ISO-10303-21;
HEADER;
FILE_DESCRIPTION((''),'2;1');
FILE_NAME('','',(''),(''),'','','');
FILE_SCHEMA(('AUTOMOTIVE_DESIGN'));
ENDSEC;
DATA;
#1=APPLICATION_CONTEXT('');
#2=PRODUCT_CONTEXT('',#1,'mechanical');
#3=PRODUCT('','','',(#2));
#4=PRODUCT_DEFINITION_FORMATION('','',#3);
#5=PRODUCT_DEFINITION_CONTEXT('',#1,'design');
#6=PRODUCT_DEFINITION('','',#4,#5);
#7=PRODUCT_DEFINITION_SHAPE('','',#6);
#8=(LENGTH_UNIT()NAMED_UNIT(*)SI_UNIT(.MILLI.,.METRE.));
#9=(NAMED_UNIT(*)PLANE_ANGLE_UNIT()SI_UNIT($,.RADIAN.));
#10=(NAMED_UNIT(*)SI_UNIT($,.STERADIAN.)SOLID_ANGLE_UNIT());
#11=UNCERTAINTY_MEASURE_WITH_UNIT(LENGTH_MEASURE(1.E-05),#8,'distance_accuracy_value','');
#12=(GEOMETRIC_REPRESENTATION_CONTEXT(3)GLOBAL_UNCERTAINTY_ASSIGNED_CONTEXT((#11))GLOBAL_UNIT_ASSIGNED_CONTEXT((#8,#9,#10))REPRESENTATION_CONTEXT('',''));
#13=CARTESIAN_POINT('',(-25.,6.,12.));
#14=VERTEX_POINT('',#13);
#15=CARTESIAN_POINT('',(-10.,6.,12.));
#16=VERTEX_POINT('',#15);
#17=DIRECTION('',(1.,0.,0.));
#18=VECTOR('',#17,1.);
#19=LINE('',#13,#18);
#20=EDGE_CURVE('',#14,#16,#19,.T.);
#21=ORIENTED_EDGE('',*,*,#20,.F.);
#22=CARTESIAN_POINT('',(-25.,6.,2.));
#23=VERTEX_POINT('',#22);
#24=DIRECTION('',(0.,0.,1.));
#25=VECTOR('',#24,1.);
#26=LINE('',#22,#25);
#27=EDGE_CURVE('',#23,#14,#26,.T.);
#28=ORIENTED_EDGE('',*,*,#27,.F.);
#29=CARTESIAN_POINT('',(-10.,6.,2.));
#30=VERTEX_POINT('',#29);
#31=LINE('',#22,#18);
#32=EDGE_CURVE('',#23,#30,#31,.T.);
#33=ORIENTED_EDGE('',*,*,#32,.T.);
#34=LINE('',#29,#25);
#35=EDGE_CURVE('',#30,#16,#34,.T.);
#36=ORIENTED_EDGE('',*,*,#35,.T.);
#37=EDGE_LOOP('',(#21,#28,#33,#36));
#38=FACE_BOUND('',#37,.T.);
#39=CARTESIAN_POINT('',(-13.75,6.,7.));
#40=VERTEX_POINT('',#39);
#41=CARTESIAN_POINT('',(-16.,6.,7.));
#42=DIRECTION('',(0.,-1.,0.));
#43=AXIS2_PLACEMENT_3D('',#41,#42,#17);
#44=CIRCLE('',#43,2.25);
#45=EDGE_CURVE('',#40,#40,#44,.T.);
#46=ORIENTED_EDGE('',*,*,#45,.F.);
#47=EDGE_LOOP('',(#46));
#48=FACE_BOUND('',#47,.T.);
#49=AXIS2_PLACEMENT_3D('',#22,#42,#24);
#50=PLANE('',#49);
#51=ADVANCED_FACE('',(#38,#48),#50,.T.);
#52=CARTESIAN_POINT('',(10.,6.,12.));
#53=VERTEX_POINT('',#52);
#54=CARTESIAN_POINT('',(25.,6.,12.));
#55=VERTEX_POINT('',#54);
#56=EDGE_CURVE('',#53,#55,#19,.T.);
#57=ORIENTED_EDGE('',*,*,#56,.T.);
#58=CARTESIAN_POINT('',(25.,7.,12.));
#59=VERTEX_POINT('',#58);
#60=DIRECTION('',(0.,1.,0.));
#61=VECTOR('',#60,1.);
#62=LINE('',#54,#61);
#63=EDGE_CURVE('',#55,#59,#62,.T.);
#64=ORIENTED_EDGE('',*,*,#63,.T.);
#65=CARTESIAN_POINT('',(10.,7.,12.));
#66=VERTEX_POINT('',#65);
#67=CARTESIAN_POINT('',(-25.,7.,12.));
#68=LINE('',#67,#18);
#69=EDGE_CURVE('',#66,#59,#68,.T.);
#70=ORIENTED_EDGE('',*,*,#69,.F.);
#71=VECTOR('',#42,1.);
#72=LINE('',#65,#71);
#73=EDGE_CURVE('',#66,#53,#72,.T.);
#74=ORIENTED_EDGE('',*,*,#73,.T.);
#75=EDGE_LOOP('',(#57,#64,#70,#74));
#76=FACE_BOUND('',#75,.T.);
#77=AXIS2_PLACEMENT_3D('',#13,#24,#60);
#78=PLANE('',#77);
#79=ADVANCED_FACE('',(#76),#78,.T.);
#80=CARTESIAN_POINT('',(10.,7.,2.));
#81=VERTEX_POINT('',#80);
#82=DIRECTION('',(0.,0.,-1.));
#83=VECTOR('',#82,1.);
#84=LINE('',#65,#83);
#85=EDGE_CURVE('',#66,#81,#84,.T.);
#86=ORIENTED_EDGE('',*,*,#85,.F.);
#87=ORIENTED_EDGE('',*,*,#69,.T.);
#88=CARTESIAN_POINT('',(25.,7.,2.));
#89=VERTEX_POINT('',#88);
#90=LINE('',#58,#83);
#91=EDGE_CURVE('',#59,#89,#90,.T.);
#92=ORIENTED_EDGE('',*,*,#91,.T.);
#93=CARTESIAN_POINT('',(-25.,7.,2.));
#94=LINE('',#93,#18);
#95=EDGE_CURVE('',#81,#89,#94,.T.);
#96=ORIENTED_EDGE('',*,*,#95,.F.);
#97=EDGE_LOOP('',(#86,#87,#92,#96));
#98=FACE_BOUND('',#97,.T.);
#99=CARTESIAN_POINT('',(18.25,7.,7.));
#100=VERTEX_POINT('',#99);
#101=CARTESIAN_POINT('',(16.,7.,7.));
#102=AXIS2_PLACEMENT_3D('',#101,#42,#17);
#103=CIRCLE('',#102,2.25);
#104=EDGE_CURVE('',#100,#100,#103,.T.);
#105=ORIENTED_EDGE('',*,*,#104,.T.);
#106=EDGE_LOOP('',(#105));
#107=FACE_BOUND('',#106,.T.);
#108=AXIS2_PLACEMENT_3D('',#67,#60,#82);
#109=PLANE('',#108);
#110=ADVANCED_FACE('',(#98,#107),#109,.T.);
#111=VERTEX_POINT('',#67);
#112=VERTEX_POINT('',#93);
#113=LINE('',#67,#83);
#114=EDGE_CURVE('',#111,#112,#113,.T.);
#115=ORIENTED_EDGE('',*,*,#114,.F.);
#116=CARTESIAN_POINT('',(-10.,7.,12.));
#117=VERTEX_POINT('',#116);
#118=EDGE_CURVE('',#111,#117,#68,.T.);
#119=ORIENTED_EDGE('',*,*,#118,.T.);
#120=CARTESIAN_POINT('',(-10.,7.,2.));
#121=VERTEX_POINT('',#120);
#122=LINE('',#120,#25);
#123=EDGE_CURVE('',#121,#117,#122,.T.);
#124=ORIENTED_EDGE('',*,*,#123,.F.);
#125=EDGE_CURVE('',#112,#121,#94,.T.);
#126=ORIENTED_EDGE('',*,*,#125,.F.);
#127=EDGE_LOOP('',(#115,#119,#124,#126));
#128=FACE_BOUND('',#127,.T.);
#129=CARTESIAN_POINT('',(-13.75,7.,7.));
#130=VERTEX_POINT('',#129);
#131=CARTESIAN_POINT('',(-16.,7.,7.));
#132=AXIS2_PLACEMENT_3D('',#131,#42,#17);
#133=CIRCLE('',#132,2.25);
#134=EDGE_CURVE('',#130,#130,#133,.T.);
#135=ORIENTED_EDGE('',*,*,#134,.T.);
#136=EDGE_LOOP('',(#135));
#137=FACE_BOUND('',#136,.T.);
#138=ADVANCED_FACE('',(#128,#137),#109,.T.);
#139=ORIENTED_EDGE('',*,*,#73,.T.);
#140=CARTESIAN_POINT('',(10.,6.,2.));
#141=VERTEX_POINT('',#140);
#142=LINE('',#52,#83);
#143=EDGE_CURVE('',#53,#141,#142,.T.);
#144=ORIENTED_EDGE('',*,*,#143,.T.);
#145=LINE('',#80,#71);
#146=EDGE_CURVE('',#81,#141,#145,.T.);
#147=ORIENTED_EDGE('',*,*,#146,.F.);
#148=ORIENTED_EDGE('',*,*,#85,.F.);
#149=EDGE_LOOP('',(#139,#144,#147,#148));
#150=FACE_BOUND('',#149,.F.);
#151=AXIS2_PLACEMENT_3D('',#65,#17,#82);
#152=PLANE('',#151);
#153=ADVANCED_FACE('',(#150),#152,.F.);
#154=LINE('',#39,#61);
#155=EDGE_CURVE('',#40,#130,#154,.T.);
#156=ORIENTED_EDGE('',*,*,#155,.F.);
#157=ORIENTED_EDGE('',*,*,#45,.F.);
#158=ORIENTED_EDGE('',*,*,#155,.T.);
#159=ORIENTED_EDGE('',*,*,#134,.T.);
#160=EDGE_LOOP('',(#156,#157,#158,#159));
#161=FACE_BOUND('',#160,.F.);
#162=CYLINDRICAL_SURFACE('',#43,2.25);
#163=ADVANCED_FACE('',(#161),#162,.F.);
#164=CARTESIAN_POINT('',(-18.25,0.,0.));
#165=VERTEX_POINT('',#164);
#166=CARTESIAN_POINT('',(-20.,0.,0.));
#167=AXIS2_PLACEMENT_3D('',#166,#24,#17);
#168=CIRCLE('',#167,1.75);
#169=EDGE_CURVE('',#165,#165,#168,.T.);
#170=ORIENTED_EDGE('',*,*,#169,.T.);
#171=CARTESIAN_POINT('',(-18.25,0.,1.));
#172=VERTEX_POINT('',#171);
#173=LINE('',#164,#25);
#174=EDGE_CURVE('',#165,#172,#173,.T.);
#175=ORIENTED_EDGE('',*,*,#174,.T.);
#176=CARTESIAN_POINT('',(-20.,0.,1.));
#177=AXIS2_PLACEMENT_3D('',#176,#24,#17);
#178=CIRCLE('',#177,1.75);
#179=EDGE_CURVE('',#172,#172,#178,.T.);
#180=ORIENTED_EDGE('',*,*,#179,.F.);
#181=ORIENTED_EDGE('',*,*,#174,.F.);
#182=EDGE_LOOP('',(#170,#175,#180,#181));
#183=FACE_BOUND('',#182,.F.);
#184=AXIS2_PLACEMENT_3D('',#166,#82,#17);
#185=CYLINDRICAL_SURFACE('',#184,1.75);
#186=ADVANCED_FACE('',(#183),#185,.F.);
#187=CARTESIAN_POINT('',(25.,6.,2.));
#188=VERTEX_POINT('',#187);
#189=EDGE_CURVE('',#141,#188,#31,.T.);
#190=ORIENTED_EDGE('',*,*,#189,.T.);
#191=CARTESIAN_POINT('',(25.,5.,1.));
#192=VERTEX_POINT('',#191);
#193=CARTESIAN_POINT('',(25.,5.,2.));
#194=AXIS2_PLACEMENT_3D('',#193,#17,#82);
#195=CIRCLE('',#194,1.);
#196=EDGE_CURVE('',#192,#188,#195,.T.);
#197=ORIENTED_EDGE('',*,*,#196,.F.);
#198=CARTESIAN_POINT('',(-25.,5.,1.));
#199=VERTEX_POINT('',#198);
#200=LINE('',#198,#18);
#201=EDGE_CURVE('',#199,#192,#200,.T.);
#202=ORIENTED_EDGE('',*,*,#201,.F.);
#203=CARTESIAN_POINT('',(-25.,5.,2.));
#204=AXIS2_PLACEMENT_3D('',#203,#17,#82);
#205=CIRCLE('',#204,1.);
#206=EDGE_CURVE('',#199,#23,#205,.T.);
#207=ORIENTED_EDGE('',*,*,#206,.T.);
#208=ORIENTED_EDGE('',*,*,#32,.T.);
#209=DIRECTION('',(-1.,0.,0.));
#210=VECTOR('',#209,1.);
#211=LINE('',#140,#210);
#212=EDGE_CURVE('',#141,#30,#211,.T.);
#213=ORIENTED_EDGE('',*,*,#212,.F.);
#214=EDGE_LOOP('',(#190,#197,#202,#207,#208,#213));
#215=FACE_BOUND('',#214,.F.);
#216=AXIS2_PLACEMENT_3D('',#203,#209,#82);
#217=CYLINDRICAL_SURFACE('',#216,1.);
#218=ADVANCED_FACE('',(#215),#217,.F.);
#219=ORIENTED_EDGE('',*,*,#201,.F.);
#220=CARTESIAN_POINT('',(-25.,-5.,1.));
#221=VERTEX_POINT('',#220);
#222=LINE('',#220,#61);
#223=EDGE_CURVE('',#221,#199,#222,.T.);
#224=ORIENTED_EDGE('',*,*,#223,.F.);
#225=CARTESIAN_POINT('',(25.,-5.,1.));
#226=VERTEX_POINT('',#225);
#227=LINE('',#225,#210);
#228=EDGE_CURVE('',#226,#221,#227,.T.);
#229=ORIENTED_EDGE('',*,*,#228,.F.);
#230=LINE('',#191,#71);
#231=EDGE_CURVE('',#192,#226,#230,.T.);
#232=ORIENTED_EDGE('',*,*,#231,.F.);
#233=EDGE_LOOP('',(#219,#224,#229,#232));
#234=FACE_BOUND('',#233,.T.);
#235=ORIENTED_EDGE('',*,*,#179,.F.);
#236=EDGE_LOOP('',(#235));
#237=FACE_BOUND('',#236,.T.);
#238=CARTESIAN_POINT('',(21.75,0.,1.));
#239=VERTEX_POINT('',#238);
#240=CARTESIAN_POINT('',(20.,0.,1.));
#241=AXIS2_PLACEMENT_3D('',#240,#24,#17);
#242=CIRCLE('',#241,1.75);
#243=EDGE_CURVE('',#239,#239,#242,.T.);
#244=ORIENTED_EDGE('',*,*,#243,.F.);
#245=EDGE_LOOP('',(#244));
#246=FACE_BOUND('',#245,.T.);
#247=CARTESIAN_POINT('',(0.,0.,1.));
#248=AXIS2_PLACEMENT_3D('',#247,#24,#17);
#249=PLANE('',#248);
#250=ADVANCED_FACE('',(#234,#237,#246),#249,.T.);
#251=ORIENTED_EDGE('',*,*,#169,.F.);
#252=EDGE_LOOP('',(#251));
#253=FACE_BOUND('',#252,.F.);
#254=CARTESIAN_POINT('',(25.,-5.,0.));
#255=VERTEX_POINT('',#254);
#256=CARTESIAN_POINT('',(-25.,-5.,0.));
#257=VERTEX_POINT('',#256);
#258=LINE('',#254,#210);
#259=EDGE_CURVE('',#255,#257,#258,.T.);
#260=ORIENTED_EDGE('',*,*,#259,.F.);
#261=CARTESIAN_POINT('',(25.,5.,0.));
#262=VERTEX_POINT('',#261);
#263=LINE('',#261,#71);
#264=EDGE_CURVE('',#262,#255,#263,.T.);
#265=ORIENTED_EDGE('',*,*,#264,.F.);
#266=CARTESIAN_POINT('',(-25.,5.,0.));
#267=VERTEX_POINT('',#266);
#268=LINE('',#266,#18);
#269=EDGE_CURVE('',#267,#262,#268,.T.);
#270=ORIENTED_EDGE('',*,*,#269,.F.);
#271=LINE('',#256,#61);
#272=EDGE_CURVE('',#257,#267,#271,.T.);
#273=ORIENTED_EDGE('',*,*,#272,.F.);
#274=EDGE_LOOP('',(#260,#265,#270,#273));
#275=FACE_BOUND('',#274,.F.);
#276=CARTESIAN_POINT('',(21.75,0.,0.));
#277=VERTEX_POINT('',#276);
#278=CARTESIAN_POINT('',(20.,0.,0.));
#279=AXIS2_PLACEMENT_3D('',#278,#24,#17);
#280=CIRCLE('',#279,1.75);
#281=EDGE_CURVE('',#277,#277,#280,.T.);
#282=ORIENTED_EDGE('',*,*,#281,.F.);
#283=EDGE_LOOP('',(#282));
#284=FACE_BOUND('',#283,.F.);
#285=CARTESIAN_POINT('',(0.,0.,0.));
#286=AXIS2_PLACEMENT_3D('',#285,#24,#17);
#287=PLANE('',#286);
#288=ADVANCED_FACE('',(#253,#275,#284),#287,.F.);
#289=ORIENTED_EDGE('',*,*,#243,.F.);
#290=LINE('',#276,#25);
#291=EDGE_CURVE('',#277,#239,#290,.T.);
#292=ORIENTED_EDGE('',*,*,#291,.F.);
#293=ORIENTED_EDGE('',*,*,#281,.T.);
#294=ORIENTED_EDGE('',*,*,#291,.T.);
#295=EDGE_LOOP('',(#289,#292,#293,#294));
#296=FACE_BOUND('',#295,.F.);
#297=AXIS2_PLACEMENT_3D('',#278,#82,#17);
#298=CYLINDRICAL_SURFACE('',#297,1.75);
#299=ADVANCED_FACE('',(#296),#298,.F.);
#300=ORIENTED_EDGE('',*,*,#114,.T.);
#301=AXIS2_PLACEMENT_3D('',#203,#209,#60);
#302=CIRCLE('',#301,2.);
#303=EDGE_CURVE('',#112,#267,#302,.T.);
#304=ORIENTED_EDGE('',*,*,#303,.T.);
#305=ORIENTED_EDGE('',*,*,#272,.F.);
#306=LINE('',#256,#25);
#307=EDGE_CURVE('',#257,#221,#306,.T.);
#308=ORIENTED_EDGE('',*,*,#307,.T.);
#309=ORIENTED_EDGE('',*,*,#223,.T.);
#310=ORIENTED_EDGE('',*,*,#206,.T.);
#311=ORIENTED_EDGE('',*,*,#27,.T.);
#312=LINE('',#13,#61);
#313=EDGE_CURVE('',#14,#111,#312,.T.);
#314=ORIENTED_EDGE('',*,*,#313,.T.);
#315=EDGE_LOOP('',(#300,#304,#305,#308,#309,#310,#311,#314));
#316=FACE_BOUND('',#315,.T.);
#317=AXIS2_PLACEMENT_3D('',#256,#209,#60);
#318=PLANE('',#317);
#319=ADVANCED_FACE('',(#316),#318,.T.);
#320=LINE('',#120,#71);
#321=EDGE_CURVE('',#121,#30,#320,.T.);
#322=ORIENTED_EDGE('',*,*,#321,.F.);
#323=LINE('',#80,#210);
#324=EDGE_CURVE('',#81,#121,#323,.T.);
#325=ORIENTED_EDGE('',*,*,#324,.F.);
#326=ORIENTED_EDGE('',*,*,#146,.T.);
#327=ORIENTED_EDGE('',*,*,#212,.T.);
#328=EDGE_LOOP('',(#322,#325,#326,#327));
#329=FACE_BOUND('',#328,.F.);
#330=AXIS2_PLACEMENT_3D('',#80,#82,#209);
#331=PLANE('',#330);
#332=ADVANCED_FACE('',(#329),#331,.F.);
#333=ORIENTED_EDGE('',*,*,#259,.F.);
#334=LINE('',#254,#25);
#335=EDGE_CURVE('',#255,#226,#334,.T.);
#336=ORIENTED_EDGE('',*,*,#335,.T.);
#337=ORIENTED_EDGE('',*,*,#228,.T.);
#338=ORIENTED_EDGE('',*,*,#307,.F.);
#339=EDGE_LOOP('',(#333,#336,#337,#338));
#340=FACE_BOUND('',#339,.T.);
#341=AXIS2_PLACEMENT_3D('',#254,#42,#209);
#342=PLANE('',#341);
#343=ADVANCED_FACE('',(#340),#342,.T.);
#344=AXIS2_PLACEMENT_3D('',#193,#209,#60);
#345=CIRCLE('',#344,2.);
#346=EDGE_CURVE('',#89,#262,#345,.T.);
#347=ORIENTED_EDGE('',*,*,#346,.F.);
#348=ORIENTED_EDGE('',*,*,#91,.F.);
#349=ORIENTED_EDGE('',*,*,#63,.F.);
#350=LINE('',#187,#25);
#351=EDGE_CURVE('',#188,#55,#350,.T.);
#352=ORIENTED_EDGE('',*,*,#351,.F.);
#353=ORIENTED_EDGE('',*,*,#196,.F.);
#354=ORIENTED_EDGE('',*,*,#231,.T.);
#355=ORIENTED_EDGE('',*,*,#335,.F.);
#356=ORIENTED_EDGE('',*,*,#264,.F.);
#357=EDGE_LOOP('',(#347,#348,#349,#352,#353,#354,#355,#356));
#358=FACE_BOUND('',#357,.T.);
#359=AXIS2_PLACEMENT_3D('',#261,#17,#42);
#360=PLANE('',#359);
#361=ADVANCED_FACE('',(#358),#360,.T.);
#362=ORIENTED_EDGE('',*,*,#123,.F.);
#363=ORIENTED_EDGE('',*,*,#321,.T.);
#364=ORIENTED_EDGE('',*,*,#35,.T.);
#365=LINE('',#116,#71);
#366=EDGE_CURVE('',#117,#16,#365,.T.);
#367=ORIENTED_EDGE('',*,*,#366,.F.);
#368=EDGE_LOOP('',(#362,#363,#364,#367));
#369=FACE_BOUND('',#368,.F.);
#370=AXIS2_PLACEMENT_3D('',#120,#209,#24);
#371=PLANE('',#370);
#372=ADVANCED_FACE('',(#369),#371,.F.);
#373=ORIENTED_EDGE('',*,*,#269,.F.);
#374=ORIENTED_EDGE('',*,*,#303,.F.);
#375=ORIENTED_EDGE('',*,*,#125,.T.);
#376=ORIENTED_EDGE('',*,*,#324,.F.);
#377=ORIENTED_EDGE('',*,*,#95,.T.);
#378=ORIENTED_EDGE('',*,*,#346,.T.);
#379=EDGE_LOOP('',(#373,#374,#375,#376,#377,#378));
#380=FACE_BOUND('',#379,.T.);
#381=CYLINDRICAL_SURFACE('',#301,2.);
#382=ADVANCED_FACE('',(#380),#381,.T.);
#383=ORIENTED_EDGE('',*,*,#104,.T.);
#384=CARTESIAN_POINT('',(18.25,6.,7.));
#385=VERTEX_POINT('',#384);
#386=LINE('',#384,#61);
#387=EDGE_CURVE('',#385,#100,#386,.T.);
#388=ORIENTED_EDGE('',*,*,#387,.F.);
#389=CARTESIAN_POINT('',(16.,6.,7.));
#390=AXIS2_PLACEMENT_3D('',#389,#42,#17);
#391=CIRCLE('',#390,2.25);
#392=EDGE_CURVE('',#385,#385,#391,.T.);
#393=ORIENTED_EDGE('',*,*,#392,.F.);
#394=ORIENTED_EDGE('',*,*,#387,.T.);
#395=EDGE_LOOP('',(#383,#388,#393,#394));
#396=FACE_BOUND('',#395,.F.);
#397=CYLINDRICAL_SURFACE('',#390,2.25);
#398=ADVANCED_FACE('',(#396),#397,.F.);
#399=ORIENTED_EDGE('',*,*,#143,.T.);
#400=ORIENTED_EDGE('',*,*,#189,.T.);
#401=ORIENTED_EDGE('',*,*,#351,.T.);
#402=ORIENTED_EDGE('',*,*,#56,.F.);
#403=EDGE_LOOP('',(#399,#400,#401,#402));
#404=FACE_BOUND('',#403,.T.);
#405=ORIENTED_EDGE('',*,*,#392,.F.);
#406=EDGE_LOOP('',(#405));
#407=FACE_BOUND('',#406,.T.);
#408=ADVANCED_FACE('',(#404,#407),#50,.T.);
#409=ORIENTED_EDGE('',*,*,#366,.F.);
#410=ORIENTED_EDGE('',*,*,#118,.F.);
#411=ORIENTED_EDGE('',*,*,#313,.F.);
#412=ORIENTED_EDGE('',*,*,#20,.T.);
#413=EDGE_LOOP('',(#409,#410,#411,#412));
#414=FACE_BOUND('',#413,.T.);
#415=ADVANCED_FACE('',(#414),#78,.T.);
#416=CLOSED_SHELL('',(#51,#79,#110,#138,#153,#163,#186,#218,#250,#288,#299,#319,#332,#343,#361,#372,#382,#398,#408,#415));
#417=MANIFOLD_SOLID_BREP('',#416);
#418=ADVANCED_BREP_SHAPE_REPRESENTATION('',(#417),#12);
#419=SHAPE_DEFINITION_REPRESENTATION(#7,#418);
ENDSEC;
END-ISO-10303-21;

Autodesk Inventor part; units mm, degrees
ref_plane "YZ Plane" through (0, 0, 0) normal (1, 0, 0) x (0, 1, 0)
ref_plane "XZ Plane" through (0, 0, 0) normal (0, 1, 0) x (-1, 0, 0)
ref_plane "XY Plane" through (0, 0, 0) normal (0, 0, 1) x (1, 0, 0)
sketch "Sketch1" plane through (0, 0, 0) normal (0, 0, 1) x (1, 0, 0)
  line L0 (-25, 5) -> (25, 5)
  line L1 (25, 5) -> (25, -5)
  line L2 (25, -5) -> (-25, -5)
  line L3 (-25, -5) -> (-25, 5)
  line L4 (-25, 5) -> (25, -5) construction
  line L5 (25, 5) -> (-25, -5) construction
  circle A0 centre (-20, 0) radius 1.75
  line L6 (0, 0) -> (0, -5.5046) construction
  circle A1 centre (20, 0) radius 1.75
  dimension "d0" = 50
  dimension "d1" = 10
  dimension "d2" = 3.5
  dimension "d3" = 40
  dimension "d4" = 5
extrude "Plate1" add sketch "Sketch1" along normal blind 1
sketch "Sketch2" plane through (-25, 6, 2) normal (0, 1, 0) x (-1, 0, 0)
  line L0 (-50, 0) -> (0, 0)
  line L1 (0, 0) -> (0, 10)
  line L2 (0, 10) -> (-50, 10)
  line L3 (-50, 10) -> (-50, 0)
edge flange "Flange1" height 12 angle 90 thickness 1 bend radius 1 thickness toward (0, 1, 0) relief tear relief width 1 relief depth 0.5 edges at (0, 5, 1) wall of the first edge with corners at (25, 6, 2) (-25, 6, 2) (-25, 6, 12) (25, 6, 12)
bend "Bend1"
corner "Corner1"
sketch "Sketch3" plane through (-25, 6, 12) normal (0, -1, 0) x (1, 0, 0)
  circle A0 centre (41, -5) radius 2.25
  circle A1 centre (9, -5) radius 2.25
  line L0 (25, -12) -> (25, 5.1941) construction
  line L1 (50, -11) -> (0, -11) construction
  dimension "d20" = 4.5
  dimension "d21" = 4.5
  dimension "d22" = 32
  dimension "d23" = 6
extrude "Cut1" cut sketch "Sketch3" against normal blind 1
sketch "Sketch4" plane through (-25, 7, 12) normal (0, 1, 0) x (1, 0, 0)
  line L0 (50, 0) -> (0, 0) projected
  line L1 (35, 10) -> (15, 10)
  line L2 (15, 10) -> (15, 0)
  line L3 (15, 0) -> (35, 0)
  line L4 (35, 0) -> (35, 10)
  line L5 (35, 10) -> (15, 0) construction
  line L6 (15, 10) -> (35, 0) construction
  line L7 (50, 10) -> (0, 10) projected
  point P0 (25, 12)
  point P1 (25, 5)
  dimension "d26" = 20
extrude "Cut2" cut sketch "Sketch4" against normal blind 1
equation "\"d20\" = d21"
equation "\"d24\" = 厚度"
equation "\"d27\" = 厚度"
equation "\"d9\" = 厚度"
equation "\"d10\" = 折彎離隙寬度"
equation "\"d11\" = 折彎離隙深度"
equation "\"d12\" = 最小剩餘"
equation "\"d13\" = 轉移半徑"
equation "\"d16\" = 折彎半徑"
equation "\"d17\" = 轉角離隙大小"
equation "\"d18\" = 間隙大小"
equation "\"d19\" = Jacobi半徑大小"
equation "\"折彎半徑\" = 厚度"
equation "\"折彎離隙寬度\" = 厚度"
equation "\"折彎離隙深度\" = 0.5 * 厚度"
equation "\"轉角離隙大小\" = 4 * 厚度"
equation "\"最小剩餘\" = 2 * 厚度"
equation "\"轉移半徑\" = 折彎半徑"
equation "\"Jacobi半徑大小\" = 折彎半徑"
equation "\"間隙大小\" = 厚度"
equation "\"厚度\" = 1"
properties part number "fan_fix_plate_connect2"
